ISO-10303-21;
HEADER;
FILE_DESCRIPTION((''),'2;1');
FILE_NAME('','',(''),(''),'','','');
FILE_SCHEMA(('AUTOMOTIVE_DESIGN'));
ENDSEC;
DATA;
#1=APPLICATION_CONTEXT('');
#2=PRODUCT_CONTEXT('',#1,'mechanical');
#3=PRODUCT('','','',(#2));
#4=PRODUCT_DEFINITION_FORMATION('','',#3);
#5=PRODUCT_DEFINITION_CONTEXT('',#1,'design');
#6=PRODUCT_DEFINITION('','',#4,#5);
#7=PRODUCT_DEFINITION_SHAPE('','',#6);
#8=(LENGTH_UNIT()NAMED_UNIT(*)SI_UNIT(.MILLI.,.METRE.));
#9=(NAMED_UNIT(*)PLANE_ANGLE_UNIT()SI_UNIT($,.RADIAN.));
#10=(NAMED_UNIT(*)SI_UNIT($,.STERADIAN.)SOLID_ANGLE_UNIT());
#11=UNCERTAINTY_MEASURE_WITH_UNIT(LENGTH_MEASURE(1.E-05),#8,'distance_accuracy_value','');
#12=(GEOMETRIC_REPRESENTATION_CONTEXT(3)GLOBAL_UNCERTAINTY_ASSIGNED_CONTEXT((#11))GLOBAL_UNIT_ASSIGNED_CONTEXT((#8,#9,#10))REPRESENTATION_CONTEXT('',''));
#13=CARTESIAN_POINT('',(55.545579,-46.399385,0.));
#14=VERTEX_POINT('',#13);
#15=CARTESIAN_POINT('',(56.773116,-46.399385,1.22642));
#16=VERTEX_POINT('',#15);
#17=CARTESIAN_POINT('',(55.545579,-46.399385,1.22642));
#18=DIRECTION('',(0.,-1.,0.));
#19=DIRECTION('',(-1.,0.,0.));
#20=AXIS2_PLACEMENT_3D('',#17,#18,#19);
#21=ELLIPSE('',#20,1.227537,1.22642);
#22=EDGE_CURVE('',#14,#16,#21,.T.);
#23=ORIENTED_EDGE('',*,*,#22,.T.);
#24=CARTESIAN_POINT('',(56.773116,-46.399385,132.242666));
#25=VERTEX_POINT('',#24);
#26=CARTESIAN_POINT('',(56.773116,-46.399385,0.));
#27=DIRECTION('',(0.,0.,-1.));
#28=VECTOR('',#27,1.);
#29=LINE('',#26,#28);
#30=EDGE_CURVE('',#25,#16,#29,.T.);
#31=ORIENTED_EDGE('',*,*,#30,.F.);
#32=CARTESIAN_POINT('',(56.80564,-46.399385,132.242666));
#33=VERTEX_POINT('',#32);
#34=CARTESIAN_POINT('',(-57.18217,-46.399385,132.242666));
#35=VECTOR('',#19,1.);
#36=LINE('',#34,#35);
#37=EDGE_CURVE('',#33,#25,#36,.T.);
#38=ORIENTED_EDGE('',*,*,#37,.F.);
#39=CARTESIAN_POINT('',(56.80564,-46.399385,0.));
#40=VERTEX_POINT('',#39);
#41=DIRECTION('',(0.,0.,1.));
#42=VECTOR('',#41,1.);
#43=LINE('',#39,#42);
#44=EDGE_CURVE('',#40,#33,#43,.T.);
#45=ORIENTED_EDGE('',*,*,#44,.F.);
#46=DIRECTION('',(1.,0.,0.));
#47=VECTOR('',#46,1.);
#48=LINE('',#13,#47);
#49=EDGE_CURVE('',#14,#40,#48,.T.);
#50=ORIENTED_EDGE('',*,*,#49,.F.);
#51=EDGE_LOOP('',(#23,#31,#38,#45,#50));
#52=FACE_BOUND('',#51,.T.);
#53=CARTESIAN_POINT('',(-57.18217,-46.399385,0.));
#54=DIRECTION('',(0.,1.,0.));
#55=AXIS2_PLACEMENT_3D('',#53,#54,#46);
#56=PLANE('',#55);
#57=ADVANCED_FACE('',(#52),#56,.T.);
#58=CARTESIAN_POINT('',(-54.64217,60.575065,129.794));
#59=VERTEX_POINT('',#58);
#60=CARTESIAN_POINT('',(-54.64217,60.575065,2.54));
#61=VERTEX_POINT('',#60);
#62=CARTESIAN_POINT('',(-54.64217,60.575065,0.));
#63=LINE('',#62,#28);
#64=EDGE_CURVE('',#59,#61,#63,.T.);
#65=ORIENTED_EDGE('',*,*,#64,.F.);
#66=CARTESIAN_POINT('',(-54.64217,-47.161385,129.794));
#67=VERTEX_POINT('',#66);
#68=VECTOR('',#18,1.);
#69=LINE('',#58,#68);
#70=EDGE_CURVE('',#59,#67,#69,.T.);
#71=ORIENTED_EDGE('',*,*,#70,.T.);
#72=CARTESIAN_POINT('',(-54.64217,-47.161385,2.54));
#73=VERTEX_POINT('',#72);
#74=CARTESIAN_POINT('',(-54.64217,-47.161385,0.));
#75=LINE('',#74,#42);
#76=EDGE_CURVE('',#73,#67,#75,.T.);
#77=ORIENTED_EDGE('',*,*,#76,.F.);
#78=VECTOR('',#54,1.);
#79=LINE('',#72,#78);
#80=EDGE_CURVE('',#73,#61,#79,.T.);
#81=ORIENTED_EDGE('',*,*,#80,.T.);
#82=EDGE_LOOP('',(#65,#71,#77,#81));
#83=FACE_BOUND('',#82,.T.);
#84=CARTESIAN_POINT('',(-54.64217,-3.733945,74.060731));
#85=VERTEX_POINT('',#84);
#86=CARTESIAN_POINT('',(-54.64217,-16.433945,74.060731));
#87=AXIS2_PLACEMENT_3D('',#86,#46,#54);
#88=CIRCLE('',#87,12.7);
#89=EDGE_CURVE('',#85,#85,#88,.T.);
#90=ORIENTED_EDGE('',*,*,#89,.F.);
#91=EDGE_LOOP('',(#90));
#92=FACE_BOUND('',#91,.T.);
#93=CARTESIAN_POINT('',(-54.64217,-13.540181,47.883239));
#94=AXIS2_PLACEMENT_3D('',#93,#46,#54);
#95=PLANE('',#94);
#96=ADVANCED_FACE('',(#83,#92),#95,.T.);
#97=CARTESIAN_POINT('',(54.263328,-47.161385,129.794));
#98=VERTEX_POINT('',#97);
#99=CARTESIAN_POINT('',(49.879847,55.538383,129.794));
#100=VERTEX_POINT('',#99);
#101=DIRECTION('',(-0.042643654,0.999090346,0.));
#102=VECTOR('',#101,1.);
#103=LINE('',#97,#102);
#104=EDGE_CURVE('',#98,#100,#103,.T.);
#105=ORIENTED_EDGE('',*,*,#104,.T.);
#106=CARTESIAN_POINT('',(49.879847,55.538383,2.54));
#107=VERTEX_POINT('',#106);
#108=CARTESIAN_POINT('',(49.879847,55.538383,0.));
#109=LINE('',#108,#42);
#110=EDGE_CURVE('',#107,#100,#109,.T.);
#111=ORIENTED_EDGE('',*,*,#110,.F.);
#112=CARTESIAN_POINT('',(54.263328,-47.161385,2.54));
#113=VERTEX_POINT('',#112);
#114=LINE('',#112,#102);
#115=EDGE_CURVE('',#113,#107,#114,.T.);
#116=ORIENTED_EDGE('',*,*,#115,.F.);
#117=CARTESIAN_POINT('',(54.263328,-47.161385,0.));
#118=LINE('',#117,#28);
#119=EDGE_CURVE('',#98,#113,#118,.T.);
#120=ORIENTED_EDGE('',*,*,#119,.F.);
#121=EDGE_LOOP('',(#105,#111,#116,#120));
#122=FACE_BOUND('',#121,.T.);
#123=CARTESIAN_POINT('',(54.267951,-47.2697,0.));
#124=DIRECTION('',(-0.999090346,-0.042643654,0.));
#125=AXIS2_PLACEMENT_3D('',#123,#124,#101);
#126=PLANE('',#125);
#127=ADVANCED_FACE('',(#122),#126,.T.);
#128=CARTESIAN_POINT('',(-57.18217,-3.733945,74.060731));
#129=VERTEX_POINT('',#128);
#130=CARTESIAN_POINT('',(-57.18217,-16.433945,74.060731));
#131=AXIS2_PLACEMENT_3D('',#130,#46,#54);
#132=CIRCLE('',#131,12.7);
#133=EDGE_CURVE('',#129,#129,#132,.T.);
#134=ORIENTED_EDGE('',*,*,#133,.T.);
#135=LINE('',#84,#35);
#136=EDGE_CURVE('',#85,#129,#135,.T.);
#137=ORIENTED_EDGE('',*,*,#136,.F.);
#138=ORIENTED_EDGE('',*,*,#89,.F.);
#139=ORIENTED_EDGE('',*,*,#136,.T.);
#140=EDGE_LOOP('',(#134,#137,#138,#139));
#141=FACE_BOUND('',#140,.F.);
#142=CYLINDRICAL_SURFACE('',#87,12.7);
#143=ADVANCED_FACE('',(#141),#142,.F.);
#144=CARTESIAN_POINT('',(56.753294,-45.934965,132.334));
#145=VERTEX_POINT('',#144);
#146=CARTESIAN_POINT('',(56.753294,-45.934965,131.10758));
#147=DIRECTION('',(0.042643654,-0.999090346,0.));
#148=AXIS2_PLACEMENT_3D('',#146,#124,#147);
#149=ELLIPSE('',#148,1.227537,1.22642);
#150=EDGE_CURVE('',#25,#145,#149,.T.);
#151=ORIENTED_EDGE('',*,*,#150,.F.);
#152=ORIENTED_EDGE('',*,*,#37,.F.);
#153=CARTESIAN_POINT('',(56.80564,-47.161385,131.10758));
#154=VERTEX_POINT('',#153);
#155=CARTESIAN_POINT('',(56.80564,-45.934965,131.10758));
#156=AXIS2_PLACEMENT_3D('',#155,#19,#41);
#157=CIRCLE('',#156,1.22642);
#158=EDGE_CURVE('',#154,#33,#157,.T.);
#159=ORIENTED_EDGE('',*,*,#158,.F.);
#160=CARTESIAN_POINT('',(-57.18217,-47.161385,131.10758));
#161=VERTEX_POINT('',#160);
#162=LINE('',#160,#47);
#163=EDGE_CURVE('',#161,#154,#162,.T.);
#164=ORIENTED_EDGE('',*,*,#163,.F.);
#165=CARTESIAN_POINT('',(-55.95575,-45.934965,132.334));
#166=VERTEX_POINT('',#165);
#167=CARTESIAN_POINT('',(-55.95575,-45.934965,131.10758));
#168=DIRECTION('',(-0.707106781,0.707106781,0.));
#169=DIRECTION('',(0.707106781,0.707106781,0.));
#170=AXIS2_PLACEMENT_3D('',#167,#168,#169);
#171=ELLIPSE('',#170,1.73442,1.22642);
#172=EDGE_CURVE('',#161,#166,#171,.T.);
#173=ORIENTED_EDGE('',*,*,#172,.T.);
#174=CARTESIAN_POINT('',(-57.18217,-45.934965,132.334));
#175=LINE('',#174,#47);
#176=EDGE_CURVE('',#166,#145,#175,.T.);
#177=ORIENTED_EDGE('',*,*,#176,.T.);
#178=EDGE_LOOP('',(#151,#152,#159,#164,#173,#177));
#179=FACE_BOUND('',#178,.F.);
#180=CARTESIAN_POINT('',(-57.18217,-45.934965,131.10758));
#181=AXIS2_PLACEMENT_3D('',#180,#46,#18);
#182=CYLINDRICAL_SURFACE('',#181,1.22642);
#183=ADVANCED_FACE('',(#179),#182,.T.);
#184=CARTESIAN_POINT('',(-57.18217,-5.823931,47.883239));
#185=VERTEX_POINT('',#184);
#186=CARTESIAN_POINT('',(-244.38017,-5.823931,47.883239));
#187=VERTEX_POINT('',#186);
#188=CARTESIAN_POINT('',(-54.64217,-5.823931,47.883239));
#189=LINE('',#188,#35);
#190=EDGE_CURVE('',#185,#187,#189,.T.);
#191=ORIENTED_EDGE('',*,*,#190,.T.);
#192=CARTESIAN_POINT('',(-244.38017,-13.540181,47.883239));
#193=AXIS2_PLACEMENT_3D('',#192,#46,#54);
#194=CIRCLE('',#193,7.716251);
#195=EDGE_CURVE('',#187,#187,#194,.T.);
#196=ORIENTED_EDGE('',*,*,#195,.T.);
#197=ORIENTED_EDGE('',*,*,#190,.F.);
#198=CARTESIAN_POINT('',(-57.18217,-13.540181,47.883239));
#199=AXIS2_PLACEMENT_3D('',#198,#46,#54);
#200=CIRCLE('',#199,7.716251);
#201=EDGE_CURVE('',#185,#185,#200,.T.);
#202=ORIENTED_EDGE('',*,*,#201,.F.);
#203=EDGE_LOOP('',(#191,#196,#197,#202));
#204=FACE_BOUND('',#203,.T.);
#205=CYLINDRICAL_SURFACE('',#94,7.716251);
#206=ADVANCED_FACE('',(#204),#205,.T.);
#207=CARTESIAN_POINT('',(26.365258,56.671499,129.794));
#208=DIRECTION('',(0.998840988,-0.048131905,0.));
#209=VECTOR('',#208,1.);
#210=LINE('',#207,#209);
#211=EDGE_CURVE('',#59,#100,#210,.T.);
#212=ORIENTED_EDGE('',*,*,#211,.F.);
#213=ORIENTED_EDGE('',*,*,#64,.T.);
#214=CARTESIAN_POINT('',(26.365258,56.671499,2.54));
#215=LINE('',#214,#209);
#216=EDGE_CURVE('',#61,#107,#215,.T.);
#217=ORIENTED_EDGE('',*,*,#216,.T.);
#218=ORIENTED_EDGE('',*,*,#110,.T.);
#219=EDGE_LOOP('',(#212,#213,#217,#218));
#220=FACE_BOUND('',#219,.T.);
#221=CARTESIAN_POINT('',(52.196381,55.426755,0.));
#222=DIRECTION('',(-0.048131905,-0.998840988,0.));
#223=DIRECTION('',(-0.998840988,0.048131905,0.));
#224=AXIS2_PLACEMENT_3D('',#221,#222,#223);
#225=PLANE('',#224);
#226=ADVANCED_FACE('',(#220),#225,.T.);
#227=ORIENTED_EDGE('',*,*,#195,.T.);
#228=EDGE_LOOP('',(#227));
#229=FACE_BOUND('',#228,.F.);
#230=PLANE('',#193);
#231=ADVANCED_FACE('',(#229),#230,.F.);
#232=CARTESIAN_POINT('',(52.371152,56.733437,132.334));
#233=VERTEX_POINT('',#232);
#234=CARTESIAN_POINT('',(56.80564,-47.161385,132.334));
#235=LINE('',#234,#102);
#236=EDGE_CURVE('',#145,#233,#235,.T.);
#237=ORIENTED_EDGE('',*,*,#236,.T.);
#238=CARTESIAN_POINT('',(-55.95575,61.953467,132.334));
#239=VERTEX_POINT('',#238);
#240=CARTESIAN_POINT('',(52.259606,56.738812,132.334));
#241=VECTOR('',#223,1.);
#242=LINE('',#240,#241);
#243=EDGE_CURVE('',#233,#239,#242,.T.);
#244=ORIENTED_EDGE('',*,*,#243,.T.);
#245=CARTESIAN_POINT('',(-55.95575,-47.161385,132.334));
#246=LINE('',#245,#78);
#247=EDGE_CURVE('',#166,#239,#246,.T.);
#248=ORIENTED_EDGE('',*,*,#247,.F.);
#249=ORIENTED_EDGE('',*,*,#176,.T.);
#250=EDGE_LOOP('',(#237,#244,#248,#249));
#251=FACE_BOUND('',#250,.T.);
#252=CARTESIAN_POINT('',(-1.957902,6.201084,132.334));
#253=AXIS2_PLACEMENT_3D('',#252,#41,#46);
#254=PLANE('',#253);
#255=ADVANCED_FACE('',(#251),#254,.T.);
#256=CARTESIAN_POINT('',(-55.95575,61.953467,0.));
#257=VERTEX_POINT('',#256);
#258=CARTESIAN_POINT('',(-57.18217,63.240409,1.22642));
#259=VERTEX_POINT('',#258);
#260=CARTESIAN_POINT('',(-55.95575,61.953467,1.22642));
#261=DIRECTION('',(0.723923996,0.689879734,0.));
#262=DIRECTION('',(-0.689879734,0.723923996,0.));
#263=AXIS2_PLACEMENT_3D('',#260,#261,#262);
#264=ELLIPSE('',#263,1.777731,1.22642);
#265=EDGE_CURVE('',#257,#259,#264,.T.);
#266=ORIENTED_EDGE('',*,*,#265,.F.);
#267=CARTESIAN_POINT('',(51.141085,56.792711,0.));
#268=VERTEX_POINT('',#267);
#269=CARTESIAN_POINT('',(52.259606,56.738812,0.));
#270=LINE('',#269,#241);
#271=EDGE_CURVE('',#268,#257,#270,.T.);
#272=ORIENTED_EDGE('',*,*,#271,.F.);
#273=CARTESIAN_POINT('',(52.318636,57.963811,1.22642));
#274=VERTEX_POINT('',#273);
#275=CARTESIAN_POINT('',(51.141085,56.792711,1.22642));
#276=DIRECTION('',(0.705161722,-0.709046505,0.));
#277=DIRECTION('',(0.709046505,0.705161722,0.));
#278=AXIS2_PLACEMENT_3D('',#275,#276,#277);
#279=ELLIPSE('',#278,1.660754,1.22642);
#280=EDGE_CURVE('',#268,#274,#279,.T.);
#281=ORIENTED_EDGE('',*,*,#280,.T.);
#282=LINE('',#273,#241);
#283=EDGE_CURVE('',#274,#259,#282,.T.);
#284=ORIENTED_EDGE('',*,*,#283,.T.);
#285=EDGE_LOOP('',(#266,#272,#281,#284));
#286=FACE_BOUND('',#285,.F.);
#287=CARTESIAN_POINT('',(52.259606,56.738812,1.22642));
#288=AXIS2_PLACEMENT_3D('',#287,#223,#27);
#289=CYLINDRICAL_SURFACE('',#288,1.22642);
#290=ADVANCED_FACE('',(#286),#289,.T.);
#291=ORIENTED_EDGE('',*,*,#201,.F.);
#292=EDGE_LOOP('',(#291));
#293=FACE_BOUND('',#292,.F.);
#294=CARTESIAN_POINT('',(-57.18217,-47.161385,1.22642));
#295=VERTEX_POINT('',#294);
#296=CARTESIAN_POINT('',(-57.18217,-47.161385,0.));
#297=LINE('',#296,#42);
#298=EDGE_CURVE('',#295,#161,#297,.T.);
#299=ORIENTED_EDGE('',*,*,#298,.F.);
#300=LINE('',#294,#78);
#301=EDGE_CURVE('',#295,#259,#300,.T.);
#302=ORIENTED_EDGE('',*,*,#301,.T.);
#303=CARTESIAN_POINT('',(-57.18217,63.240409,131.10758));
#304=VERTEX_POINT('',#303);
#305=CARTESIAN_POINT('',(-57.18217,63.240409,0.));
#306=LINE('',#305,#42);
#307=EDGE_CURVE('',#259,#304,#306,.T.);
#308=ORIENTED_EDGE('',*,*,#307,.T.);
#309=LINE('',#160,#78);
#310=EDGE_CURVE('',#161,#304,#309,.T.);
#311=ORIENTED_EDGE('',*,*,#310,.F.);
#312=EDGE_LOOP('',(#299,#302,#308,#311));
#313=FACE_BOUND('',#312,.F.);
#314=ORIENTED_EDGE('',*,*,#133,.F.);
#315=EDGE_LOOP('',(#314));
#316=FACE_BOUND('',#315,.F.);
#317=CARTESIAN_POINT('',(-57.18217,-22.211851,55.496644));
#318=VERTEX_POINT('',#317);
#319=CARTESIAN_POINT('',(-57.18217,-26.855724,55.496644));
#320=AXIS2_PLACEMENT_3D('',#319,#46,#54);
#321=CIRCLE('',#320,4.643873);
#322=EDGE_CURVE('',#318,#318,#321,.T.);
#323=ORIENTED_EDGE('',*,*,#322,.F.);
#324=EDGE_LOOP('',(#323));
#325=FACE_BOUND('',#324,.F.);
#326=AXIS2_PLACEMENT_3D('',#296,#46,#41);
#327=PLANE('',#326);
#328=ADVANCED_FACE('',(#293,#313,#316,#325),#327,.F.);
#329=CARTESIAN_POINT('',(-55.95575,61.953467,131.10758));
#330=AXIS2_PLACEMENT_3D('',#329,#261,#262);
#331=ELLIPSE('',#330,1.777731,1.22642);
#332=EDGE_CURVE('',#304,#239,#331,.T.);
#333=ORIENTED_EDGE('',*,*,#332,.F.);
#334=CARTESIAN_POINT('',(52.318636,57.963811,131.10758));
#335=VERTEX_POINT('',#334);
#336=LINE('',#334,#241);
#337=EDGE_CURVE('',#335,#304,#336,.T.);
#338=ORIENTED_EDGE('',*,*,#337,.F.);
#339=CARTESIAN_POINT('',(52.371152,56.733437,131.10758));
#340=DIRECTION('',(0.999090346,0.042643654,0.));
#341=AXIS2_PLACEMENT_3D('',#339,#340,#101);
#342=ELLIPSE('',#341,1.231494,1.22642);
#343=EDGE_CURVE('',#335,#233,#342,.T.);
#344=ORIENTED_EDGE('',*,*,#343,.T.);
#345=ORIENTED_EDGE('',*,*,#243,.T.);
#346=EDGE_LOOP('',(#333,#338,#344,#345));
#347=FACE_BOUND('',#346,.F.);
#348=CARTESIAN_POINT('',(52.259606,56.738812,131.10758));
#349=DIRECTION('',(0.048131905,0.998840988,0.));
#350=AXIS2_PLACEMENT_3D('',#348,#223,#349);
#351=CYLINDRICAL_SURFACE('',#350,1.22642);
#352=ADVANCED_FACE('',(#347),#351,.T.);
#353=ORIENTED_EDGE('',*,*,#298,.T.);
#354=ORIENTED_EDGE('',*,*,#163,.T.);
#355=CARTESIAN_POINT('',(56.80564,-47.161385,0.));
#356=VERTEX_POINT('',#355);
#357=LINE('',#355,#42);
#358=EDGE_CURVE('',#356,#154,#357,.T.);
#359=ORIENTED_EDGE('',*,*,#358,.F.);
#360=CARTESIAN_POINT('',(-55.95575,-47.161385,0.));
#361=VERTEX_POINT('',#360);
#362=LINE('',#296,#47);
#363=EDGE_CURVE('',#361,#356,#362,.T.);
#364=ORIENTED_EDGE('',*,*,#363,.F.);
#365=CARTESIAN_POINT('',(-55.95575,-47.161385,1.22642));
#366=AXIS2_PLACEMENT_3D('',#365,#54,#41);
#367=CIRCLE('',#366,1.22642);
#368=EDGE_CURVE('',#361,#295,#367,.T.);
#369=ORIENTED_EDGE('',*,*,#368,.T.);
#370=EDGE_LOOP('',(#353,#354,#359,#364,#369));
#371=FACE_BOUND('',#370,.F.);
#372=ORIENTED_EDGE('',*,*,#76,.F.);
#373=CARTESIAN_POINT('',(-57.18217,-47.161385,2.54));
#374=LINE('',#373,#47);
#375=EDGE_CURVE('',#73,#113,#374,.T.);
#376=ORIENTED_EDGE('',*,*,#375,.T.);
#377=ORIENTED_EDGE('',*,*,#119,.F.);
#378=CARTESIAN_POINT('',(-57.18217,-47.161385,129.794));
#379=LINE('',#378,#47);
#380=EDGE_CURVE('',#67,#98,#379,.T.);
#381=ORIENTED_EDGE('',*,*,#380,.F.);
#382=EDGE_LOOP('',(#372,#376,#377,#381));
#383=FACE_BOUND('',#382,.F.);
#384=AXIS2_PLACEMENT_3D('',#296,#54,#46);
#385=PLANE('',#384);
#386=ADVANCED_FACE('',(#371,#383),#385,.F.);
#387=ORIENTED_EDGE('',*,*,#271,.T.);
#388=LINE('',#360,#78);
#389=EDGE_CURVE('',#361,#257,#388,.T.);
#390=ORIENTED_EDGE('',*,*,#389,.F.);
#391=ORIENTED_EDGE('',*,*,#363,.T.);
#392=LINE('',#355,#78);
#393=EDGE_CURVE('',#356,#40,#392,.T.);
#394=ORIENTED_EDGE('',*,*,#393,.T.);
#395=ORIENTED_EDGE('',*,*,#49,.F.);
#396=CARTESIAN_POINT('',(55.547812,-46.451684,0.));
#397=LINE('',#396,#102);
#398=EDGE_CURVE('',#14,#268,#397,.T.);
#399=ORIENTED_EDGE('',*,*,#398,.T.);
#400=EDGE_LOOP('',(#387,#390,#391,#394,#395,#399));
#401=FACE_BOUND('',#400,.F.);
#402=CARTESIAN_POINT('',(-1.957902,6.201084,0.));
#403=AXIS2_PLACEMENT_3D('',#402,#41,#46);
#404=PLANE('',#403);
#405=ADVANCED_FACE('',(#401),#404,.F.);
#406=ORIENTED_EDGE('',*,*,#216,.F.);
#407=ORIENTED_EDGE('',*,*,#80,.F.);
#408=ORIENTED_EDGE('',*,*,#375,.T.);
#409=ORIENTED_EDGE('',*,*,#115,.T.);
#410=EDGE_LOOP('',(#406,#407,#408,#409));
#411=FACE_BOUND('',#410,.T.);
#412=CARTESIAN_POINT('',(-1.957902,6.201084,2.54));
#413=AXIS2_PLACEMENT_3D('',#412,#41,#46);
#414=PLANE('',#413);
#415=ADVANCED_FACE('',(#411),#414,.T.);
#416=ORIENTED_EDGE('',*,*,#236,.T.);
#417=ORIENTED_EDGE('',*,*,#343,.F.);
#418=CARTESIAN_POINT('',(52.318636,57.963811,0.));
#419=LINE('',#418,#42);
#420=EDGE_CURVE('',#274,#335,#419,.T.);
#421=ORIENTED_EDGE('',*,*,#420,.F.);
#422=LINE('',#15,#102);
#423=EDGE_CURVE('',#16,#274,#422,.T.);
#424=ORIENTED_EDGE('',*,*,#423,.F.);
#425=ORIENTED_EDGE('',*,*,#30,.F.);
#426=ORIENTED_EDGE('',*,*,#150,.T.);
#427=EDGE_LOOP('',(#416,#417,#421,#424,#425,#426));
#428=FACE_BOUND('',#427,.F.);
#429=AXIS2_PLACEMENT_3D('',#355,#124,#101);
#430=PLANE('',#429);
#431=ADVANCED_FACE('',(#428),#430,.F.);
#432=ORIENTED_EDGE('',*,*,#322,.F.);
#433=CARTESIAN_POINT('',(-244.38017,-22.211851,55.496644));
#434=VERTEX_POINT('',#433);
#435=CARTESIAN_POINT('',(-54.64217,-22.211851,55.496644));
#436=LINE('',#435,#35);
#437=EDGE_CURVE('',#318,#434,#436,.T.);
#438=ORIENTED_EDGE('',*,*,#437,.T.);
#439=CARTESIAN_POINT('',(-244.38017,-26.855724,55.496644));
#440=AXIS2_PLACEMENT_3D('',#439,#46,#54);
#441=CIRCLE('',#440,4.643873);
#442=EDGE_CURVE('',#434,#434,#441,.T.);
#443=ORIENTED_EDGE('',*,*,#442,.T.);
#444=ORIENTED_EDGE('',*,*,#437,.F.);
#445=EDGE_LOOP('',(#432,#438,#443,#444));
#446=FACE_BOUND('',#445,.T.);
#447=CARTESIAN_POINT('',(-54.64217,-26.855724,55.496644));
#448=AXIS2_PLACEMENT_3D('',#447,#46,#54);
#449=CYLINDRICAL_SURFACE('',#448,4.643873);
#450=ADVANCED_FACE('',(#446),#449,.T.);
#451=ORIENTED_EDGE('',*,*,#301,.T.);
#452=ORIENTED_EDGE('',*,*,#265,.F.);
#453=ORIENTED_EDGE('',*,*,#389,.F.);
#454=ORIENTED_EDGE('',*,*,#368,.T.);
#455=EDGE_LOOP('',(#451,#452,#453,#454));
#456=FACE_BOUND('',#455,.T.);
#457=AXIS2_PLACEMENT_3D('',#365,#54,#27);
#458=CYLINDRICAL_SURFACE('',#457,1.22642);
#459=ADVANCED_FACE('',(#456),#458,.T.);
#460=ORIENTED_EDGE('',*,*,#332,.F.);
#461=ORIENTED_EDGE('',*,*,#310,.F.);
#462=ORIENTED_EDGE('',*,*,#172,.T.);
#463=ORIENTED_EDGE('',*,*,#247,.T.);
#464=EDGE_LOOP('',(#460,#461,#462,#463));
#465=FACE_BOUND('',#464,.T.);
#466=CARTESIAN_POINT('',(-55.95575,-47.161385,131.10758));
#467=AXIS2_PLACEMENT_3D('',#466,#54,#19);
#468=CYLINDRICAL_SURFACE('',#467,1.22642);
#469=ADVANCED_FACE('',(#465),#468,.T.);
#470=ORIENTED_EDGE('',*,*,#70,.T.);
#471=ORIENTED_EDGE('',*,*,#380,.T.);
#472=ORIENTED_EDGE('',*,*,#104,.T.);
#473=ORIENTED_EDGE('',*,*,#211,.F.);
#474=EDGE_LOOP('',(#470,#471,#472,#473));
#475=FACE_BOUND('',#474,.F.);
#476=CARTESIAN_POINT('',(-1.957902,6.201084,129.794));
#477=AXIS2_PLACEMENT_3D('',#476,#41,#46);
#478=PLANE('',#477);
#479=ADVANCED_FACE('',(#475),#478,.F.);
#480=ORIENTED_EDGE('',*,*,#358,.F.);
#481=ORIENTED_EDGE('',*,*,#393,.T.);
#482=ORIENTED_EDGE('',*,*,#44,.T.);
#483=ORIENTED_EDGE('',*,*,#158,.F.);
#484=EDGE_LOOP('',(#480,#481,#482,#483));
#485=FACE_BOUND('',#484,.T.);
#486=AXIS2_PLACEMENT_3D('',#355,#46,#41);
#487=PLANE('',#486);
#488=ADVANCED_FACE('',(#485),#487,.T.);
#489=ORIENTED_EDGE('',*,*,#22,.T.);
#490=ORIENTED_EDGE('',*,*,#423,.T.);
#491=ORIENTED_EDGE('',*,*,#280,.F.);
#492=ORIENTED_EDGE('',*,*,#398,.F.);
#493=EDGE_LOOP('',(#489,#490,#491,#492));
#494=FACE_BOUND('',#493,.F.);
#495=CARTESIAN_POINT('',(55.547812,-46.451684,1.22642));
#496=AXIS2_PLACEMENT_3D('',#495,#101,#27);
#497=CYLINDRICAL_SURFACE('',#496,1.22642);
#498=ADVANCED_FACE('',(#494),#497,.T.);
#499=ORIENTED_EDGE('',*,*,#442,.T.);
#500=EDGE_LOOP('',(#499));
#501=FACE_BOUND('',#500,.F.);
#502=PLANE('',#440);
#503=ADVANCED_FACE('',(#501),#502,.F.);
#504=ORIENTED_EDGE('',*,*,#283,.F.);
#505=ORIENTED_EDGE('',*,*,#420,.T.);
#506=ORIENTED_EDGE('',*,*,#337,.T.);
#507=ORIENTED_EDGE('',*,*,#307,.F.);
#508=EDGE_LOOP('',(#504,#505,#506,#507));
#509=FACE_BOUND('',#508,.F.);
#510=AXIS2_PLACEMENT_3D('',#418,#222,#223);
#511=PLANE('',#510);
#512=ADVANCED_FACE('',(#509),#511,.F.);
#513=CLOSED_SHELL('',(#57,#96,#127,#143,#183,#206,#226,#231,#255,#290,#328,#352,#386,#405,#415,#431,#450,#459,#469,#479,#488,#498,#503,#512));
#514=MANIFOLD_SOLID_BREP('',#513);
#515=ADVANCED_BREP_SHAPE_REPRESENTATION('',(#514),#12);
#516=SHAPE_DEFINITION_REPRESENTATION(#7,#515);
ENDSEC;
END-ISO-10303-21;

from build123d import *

# Parameters (mm, degrees)
F1_DEPTH  = 132.334
F2_T      = -2.54
F3_DEPTH  = 0.762
F5_D      = 25.4
F5_DEPTH  = 5.08
F5_TIP    = 7.6309298617
F9_R      = 1.2264204897
F7_R      = 7.7162508116
F7_R_2    = 4.6438728955
F10_DEPTH = 189.738


with BuildPart() as f1:
    # F0 (on Top) → F1 (new body)
    with BuildSketch(Plane.XY):
        Polygon((52.318636328, 57.9638108611), (-57.1821704507, 63.2404088974), (-57.1821704507, -47.161385417), (56.8056404591, -47.161385417), align=None)
    extrude(amount=F1_DEPTH)

    # F2
    f2_openings = [f1.faces().sort_by_distance(p)[0] for p in [
        (-0.188265, -47.161385, 66.167),
    ]]
    offset(amount=F2_T, openings=f2_openings)

    # F3 (add): a face of the model
    f3_faces = [f1.faces().sort_by_distance(p)[0] for p in [
        (-55.4355878276, -47.161385417, 66.167),
    ]]
    extrude(f3_faces, amount=-F3_DEPTH)

    # F5 (one way)
    with BuildSketch(Plane.YZ.offset(-54.6421704507)):
        with Locations((-16.4339449257, 74.0607306361)):
            Circle(F5_D / 2)
    extrude(amount=-F5_DEPTH, mode=Mode.SUBTRACT)
    with Locations(Plane.YZ.offset(-54.6421704507)):
        with Locations((-16.4339449257, 74.0607306361)):
            with Locations((0, 0, -(F5_DEPTH + F5_TIP / 2))):  # 118° drill point
                Cone(0, F5_D / 2, F5_TIP, mode=Mode.SUBTRACT)

    # F9
    f9_edges = [f1.edges().sort_by_distance(p)[0] for p in [
        (-57.18217, 8.039512, 132.334),
        (-2.431767, 60.60211, 132.334),
        (-0.188265, -47.161385, 132.334),
        (-57.18217, 8.039512, 0),
        (54.545876, 5.782213, 0),
        (-2.431767, 60.60211, 0),
    ]]
    fillet(f9_edges, radius=F9_R)

    # F7 (on face) → F10 (join)
    with BuildSketch(Plane.YZ.offset(-54.6421704507)):
        with Locations((-13.5401813313, 47.8832386434)):
            Circle(F7_R)
        with Locations((-26.8557239324, 55.4966442287)):
            Circle(F7_R_2)
    extrude(amount=-F10_DEPTH)


solid = f1.part
